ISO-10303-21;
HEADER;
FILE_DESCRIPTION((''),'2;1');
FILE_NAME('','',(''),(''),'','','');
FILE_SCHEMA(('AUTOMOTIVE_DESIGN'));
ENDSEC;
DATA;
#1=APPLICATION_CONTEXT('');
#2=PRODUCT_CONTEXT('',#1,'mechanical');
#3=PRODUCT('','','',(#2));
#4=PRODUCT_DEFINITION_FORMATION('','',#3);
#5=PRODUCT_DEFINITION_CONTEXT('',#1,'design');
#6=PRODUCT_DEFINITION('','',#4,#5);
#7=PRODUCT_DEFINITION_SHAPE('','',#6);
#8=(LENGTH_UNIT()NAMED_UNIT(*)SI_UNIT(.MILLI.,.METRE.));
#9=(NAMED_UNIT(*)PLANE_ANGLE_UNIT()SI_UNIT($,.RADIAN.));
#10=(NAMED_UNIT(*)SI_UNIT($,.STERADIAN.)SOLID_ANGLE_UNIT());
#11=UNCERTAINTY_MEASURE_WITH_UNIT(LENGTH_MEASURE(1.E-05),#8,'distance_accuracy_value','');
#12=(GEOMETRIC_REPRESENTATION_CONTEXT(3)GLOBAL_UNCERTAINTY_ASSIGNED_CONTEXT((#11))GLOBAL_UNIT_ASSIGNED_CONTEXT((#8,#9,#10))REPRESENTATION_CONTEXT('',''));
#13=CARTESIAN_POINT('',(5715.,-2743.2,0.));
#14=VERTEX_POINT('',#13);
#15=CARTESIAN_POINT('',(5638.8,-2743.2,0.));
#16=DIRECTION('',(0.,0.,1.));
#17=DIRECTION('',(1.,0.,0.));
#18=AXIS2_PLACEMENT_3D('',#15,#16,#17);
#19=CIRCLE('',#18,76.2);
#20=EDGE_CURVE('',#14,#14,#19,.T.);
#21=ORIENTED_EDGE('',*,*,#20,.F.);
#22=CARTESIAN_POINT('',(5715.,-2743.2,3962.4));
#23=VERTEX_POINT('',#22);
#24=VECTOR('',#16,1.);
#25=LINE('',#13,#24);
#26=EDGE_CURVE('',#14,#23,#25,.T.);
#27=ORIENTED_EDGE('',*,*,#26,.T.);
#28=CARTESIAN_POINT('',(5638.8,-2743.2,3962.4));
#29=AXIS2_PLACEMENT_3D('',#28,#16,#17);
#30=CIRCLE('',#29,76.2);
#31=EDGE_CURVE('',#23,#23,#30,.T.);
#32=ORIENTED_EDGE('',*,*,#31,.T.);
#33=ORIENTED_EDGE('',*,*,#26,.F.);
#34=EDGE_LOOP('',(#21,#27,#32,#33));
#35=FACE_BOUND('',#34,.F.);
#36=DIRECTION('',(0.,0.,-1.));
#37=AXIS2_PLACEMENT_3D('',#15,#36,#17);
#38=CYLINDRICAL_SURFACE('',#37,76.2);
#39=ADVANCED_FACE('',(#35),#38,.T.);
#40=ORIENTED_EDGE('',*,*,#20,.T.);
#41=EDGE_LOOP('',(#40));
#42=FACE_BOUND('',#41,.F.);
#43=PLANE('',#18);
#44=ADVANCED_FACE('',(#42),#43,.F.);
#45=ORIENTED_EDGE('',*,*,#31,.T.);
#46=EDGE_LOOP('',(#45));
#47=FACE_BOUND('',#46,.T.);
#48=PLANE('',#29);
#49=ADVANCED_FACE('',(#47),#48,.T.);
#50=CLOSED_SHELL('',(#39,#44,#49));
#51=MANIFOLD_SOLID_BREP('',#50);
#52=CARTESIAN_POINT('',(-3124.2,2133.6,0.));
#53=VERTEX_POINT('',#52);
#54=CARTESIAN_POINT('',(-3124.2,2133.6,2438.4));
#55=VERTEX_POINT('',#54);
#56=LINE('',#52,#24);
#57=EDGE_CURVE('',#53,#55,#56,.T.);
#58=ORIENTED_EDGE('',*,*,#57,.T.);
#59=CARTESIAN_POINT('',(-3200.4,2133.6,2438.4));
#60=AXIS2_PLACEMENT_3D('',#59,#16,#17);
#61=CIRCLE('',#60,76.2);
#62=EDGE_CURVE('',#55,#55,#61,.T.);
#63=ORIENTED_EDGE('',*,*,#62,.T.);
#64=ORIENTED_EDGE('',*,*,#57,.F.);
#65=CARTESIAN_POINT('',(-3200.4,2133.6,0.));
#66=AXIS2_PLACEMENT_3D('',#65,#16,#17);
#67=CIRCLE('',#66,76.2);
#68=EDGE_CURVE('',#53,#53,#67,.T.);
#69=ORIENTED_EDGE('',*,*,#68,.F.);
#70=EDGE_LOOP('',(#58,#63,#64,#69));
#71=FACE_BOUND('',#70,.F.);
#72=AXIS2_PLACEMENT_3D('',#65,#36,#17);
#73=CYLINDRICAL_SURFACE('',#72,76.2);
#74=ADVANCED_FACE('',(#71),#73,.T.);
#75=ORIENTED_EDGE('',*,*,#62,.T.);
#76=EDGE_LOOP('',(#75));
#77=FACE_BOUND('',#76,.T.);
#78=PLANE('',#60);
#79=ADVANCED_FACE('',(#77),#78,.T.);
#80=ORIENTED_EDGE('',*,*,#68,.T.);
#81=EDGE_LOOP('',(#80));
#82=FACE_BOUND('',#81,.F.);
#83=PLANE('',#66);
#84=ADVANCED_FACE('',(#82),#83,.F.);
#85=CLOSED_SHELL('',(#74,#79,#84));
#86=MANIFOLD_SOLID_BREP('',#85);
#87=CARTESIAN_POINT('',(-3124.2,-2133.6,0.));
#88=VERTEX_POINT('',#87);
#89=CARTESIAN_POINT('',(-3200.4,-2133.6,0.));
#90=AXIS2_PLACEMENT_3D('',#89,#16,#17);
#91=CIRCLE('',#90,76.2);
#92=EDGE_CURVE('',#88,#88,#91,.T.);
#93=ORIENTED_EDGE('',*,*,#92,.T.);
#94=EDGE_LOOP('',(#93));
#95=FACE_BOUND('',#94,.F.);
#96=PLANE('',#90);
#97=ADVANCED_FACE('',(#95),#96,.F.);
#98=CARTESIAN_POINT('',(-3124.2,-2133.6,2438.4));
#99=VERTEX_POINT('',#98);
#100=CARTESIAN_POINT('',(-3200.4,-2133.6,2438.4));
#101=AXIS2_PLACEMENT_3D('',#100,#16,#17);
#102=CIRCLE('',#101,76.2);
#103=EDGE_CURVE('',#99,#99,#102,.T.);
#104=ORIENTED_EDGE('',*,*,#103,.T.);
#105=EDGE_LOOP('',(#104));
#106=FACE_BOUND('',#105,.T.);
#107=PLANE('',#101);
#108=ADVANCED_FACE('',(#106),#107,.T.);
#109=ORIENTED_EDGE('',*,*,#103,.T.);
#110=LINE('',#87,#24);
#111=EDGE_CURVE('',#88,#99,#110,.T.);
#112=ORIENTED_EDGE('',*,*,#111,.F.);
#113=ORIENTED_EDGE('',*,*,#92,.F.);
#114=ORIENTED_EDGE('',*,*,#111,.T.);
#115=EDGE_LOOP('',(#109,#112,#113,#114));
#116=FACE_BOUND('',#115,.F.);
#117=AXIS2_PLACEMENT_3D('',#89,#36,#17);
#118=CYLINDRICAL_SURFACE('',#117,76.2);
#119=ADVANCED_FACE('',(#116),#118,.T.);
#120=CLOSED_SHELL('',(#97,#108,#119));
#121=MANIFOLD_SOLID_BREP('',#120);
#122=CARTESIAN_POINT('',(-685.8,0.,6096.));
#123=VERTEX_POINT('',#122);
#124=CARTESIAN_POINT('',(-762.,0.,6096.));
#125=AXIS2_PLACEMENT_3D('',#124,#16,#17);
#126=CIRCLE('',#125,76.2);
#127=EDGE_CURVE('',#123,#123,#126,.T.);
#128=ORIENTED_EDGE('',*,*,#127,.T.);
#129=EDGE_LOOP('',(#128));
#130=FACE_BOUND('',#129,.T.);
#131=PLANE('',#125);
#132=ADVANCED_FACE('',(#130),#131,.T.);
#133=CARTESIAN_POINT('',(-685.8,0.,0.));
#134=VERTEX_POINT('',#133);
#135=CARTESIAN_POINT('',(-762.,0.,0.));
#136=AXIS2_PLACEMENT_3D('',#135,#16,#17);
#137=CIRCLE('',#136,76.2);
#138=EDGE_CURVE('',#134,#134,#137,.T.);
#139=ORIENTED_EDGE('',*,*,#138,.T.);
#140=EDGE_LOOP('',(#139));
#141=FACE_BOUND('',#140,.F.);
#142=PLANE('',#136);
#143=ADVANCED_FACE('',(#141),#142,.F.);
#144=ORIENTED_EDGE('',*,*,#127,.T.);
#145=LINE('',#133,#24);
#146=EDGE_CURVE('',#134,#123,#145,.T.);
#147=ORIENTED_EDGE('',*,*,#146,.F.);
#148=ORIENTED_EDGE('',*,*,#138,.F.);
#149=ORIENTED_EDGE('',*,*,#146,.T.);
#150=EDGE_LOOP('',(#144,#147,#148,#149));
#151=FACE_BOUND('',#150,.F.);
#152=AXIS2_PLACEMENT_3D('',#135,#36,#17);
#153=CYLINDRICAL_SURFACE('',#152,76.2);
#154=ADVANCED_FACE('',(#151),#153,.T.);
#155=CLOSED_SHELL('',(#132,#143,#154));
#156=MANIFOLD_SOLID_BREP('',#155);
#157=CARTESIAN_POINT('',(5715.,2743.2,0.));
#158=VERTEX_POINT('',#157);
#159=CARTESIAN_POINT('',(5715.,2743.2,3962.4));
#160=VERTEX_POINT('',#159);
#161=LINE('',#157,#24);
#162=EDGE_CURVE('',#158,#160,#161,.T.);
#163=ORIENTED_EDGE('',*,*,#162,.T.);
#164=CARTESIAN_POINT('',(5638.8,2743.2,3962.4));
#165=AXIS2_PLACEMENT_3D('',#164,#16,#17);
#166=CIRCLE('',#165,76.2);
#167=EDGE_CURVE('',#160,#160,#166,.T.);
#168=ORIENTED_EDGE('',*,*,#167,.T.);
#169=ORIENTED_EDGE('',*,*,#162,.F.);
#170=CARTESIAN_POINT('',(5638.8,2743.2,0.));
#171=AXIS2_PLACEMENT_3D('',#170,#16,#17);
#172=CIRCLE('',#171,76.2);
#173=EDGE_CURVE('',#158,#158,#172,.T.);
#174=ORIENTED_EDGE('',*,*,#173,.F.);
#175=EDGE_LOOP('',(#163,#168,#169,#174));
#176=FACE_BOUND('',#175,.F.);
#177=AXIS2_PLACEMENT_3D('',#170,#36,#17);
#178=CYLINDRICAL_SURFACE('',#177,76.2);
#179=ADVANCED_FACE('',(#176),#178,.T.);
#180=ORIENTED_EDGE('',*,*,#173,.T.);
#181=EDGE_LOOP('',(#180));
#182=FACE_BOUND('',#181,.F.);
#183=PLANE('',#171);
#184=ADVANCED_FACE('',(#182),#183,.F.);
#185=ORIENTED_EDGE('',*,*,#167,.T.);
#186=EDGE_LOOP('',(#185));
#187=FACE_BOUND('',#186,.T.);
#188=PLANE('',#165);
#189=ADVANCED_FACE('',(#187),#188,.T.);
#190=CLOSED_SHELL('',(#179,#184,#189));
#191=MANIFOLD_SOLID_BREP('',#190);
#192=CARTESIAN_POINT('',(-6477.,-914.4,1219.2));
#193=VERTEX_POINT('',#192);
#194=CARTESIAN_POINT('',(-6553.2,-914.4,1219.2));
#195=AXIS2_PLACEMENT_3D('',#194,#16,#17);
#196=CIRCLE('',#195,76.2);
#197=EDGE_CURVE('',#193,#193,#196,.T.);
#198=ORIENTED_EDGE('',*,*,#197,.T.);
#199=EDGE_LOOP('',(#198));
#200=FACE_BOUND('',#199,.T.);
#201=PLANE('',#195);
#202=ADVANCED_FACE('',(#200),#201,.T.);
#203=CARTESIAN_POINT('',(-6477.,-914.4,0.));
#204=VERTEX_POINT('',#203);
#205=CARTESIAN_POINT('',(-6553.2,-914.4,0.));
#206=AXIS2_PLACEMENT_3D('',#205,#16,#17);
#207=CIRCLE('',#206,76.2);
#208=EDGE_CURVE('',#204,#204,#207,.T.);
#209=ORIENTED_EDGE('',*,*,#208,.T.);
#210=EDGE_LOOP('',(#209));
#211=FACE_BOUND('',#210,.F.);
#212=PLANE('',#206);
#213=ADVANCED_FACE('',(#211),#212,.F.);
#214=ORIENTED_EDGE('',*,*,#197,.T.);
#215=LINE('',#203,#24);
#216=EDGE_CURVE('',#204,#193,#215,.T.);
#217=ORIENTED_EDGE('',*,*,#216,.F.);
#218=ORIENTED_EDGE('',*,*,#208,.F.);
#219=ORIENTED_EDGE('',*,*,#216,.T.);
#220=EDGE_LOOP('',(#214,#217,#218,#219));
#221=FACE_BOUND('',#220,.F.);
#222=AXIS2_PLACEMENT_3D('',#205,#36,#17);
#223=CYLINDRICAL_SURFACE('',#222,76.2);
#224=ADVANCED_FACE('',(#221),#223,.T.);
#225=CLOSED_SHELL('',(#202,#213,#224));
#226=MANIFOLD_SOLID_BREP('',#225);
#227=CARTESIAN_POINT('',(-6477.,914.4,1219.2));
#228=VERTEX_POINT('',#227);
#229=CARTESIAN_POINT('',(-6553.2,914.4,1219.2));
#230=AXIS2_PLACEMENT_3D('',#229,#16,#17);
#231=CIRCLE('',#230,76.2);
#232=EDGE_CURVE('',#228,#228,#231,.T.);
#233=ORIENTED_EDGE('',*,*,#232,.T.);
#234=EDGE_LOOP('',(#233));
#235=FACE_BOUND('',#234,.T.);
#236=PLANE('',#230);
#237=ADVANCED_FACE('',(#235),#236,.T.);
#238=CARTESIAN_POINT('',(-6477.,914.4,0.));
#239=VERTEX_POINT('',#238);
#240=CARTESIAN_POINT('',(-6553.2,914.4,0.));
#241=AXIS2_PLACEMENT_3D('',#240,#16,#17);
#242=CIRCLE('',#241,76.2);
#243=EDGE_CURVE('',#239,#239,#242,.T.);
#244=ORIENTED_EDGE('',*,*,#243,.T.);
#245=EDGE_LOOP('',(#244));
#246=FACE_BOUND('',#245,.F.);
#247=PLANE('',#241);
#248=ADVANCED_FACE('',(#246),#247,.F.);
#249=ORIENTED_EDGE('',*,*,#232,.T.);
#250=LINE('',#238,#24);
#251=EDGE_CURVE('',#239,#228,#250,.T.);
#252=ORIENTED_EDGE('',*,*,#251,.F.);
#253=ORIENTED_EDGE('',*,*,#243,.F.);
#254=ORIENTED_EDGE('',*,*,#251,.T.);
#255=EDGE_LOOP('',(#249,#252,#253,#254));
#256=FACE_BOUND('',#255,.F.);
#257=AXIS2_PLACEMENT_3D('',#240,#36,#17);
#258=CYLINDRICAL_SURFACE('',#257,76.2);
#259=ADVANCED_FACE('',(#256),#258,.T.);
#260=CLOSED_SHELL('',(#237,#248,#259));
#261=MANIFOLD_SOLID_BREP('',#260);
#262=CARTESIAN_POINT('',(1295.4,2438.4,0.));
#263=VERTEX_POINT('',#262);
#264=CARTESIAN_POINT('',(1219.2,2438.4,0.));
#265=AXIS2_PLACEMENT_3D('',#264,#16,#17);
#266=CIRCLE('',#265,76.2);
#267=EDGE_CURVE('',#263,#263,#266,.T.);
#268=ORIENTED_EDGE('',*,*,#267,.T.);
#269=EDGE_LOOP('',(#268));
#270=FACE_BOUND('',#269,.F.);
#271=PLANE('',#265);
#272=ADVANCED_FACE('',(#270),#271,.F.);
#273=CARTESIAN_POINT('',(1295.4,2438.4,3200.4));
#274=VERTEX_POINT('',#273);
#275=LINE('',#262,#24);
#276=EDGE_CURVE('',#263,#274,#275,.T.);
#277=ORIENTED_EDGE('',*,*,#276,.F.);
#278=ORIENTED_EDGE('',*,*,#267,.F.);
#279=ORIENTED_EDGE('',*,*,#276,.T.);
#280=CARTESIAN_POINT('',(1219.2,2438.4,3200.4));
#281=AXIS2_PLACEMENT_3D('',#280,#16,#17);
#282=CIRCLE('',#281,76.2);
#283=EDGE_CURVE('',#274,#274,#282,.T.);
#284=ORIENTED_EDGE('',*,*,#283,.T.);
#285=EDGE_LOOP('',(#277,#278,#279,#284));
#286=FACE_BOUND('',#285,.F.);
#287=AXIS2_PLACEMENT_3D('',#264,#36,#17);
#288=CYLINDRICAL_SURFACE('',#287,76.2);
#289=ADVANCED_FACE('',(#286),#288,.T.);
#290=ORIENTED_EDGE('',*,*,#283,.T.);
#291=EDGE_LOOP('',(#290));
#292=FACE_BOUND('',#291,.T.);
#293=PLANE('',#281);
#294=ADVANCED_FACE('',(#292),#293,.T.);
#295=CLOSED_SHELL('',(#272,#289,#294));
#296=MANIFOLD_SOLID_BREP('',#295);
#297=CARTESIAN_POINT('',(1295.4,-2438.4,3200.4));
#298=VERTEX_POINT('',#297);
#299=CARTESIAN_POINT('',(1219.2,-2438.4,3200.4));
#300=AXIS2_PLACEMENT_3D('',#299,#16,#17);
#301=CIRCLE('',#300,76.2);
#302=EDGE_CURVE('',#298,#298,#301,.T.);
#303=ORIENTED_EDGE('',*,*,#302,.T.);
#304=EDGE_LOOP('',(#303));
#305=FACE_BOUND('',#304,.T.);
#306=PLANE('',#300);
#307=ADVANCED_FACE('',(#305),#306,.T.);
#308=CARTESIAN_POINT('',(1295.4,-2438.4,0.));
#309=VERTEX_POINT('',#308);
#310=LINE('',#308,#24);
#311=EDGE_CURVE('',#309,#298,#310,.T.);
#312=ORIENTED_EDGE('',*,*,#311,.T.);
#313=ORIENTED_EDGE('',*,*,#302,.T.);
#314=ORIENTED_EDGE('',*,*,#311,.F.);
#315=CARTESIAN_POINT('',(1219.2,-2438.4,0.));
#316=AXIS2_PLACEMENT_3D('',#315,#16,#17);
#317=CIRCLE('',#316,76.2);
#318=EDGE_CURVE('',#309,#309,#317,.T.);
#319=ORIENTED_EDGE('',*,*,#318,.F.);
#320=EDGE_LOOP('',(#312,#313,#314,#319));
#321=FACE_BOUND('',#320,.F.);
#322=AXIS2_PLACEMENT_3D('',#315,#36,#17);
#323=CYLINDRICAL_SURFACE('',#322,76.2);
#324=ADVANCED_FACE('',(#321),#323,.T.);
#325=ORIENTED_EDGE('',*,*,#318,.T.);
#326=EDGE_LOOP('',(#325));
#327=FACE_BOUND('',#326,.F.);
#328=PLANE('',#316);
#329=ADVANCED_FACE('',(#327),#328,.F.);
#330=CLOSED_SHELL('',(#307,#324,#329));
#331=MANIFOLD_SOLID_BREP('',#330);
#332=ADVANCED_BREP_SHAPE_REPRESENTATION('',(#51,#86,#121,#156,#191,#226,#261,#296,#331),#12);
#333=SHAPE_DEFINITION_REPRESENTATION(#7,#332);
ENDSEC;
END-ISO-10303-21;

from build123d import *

# Parameters (mm, degrees)
F1_R     = 76.2
F2_DEPTH = 1219.2
F3_DEPTH = 2438.4
F4_DEPTH = 6096
F5_DEPTH = 3200.4
F6_DEPTH = 3962.4


# Not quite as in the source:
# - the program builds the solid bodies; features that only make, move or delete a surface that nothing else refers to are left out


with BuildPart() as f2:
    # F1 (on Top) → F2 (new body)
    with BuildSketch(Plane.XY):
        with Locations((-6553.2, 914.4)):
            Circle(F1_R)
    extrude(amount=F2_DEPTH)


with BuildPart() as f2b:
    # F1 (on Top) → F2, piece 2 (new body)
    with BuildSketch(Plane.XY):
        with Locations((-6553.2, -914.4)):
            Circle(F1_R)
    extrude(amount=F2_DEPTH)


with BuildPart() as f3:
    # F1 (on Top) → F3 (new body)
    with BuildSketch(Plane.XY):
        with Locations((-3200.4, 2133.6)):
            Circle(F1_R)
    extrude(amount=F3_DEPTH)


with BuildPart() as f3b:
    # F1 (on Top) → F3, piece 2 (new body)
    with BuildSketch(Plane.XY):
        with Locations((-3200.4, -2133.6)):
            Circle(F1_R)
    extrude(amount=F3_DEPTH)


with BuildPart() as f4:
    # F1 (on Top) → F4 (new body)
    with BuildSketch(Plane.XY):
        with Locations((-762, 0)):
            Circle(F1_R)
    extrude(amount=F4_DEPTH)


with BuildPart() as f5:
    # F1 (on Top) → F5 (new body)
    with BuildSketch(Plane.XY):
        with Locations((1219.2, 2438.4)):
            Circle(F1_R)
    extrude(amount=F5_DEPTH)


with BuildPart() as f5b:
    # F1 (on Top) → F5, piece 2 (new body)
    with BuildSketch(Plane.XY):
        with Locations((1219.2, -2438.4)):
            Circle(F1_R)
    extrude(amount=F5_DEPTH)


with BuildPart() as f6:
    # F1 (on Top) → F6 (new body)
    with BuildSketch(Plane.XY):
        with Locations((5638.8, 2743.2)):
            Circle(F1_R)
    extrude(amount=F6_DEPTH)


with BuildPart() as f6b:
    # F1 (on Top) → F6, piece 2 (new body)
    with BuildSketch(Plane.XY):
        with Locations((5638.8, -2743.2)):
            Circle(F1_R)
    extrude(amount=F6_DEPTH)


solid = Compound([f2.part, f2b.part, f3.part, f3b.part, f4.part, f5.part, f5b.part, f6.part, f6b.part])
